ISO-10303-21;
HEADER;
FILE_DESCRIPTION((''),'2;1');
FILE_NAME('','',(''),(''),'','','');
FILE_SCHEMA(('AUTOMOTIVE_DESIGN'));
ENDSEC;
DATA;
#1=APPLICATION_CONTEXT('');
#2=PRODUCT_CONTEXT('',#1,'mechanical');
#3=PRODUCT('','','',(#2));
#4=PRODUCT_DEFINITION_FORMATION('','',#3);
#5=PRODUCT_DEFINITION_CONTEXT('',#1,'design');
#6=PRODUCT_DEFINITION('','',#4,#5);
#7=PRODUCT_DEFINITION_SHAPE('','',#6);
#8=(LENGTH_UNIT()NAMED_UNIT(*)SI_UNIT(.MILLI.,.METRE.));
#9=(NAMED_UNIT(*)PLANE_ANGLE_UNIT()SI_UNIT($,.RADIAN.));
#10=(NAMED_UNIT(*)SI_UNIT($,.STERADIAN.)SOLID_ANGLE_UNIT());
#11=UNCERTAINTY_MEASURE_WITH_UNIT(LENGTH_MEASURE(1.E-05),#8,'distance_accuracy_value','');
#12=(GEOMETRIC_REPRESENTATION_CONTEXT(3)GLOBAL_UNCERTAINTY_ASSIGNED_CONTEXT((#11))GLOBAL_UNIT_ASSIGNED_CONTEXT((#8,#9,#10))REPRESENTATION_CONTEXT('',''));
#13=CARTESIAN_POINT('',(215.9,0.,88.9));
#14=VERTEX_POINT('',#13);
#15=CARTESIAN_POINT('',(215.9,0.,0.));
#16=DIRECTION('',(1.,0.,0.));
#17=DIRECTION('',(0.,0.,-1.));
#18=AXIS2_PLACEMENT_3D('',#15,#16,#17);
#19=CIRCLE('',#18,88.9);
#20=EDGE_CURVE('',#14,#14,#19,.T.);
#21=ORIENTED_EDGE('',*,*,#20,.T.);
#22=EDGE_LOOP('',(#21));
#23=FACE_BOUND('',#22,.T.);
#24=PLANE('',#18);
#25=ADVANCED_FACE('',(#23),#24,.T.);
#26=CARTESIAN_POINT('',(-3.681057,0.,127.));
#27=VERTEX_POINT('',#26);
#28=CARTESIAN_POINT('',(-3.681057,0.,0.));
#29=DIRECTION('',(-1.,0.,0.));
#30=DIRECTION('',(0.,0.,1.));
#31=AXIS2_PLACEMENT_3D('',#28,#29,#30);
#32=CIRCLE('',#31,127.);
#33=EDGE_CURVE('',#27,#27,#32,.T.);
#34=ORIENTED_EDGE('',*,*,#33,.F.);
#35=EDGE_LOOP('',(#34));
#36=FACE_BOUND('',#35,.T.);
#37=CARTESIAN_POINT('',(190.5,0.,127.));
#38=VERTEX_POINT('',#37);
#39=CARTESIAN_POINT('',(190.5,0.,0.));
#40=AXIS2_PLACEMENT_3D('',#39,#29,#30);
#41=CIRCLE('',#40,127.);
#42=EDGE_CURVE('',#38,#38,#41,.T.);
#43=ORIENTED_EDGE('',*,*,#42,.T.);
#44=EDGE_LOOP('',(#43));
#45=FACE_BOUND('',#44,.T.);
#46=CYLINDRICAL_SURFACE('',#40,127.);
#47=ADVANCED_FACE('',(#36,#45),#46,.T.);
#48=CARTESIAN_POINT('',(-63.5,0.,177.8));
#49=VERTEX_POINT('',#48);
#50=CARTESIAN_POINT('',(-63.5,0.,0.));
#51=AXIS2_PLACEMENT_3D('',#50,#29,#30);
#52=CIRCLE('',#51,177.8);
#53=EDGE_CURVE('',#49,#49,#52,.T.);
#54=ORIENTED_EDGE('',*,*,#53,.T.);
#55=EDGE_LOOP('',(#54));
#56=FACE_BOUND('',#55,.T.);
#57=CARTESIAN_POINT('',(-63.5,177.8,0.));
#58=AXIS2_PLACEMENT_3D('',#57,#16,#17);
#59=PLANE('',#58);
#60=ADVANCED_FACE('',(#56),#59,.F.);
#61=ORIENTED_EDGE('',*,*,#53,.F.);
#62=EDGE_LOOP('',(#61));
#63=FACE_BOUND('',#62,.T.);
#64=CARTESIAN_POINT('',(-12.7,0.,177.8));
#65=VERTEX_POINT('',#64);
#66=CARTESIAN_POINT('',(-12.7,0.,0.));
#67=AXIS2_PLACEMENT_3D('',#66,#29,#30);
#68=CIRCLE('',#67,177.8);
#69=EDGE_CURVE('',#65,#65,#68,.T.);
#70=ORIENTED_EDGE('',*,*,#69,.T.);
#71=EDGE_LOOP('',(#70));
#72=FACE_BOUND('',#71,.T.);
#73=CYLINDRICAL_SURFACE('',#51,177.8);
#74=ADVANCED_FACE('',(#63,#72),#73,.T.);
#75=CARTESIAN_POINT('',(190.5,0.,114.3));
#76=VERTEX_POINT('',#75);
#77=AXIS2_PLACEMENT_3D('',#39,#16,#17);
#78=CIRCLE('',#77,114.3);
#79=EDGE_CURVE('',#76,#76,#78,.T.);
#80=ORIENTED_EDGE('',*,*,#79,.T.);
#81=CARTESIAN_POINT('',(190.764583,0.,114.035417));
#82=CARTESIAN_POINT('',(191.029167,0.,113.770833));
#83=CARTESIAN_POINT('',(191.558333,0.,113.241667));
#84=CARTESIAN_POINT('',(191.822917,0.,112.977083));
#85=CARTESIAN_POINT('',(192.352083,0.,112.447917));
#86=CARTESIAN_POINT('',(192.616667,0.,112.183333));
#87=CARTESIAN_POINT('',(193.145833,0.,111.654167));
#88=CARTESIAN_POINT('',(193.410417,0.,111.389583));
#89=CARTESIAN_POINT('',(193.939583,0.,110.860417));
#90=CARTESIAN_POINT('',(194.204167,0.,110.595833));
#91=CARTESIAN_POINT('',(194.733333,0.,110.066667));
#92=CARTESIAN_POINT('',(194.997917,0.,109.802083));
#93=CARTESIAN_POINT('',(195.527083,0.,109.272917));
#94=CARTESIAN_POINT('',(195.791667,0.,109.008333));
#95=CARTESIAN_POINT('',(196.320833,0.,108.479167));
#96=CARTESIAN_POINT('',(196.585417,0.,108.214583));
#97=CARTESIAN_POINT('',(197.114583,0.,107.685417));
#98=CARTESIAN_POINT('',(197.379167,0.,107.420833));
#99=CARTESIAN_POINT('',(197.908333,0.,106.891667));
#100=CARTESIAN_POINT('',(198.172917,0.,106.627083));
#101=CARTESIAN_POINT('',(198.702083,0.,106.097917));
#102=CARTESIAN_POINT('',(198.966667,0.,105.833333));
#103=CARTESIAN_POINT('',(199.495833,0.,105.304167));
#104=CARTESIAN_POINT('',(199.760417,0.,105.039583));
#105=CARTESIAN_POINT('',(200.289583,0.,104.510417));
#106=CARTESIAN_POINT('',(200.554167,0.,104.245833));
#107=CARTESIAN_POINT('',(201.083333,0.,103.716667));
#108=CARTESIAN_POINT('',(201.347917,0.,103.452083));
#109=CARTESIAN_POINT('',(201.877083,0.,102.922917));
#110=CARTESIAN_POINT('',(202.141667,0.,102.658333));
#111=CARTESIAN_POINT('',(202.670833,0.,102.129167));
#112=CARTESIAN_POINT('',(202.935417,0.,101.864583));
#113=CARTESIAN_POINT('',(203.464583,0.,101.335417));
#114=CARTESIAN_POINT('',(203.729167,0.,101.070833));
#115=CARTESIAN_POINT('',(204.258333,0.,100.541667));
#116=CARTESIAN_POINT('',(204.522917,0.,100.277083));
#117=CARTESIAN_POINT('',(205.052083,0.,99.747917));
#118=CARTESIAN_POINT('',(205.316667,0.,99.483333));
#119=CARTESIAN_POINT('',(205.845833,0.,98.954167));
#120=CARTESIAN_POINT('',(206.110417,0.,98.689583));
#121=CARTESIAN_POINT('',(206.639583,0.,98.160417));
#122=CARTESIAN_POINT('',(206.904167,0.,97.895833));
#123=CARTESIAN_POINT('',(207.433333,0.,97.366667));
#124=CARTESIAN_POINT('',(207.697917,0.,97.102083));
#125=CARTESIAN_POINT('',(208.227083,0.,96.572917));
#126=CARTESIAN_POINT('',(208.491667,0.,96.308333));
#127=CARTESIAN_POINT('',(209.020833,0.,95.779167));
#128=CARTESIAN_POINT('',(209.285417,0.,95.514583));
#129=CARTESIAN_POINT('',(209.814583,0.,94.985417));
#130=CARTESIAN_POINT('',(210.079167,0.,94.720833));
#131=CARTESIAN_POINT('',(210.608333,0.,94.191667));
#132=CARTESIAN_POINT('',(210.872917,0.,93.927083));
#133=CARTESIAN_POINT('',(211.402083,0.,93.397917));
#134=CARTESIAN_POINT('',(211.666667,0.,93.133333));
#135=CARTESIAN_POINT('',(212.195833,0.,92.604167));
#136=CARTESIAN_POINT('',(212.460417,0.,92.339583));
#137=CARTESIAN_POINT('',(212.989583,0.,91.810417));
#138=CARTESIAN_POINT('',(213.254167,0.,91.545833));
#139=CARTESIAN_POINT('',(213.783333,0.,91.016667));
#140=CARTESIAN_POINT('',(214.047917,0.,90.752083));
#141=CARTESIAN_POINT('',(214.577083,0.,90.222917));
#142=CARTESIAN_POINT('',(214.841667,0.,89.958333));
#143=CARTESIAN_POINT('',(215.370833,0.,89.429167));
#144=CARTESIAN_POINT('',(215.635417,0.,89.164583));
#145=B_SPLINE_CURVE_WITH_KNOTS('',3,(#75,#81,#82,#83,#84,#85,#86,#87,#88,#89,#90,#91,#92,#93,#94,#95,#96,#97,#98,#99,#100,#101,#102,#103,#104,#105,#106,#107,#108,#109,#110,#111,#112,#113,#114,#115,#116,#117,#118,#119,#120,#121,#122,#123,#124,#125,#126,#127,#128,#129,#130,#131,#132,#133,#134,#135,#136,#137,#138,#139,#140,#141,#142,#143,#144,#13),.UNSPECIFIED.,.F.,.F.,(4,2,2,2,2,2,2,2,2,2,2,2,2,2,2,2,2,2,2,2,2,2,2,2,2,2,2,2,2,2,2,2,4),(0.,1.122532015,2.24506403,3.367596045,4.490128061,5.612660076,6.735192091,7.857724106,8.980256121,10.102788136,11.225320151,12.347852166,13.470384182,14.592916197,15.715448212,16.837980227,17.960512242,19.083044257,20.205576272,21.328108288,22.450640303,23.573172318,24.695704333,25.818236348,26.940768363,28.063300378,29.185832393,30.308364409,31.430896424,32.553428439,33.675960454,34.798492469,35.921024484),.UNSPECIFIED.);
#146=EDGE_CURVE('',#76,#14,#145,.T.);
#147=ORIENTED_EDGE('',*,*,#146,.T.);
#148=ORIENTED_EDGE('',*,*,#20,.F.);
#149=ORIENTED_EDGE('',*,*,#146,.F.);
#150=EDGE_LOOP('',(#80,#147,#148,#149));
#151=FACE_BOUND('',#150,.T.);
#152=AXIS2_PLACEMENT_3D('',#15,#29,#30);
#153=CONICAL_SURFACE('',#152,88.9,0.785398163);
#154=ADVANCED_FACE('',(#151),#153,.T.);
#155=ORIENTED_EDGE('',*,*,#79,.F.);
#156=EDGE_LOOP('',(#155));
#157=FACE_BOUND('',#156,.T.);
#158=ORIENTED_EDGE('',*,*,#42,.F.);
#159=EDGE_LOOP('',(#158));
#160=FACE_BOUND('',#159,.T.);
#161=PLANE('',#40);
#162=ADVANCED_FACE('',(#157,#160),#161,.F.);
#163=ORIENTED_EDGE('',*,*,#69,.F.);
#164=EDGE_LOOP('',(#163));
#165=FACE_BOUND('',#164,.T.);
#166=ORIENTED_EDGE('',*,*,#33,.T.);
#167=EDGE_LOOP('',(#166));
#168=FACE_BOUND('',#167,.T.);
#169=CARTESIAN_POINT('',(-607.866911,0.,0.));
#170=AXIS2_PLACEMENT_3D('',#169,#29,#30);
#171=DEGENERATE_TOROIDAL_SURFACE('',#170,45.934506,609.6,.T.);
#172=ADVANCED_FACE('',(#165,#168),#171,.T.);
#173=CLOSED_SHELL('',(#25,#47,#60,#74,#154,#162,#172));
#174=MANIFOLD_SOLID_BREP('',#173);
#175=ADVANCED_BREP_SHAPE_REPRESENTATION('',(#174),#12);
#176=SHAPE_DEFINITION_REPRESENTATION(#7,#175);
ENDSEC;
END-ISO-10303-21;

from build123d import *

# Parameters (mm, degrees)
SKETCH4_R           = 127
BOSS_EXTRUDE1_DEPTH = 254
SKETCH5_R           = 114.3
BOSS_EXTRUDE2_DEPTH = 25.4
CHAMFER1_SIZE       = 25.4


with BuildPart() as part:
    # Sketch3 → Revolve1 (revolve)
    with BuildSketch(Plane.XY, mode=Mode.PRIVATE) as revolve1_sk:
        with BuildLine():
            Line((-12.7, 177.8), (-63.5, 177.8))
            Line((-63.5, 177.8), (-63.5, 0))
            Line((-63.5, 0), (0, 0))
            ThreePointArc((0, 0), (0.183912717, 89.366708051), (-12.7, 177.8))
        make_face()
    revolve(revolve1_sk.sketch.rotate(Axis((-63.5, 0, 0), (1, 0, 0)), 90), axis=Axis((-63.5, 0, 0), (1, 0, 0)))

    # Sketch4 → Boss-Extrude1 (add)
    with BuildSketch(Plane.ZY.offset(63.5)):
        Circle(SKETCH4_R)
    extrude(amount=-BOSS_EXTRUDE1_DEPTH)

    # Sketch5 → Boss-Extrude2 (add)
    with BuildSketch(Plane(origin=(190.5, 0, 0), x_dir=(0, 0, -1), z_dir=(1, 0, 0))):
        Circle(SKETCH5_R)
    extrude(amount=BOSS_EXTRUDE2_DEPTH)

    # Chamfer1
    chamfer1_edges = [part.edges().sort_by_distance(p)[0] for p in [
        (215.9, 0, 114.3),
    ]]
    chamfer(chamfer1_edges, length=CHAMFER1_SIZE - 0.0001)  # a hair under: the kernel refuses the full size


solid = part.part
